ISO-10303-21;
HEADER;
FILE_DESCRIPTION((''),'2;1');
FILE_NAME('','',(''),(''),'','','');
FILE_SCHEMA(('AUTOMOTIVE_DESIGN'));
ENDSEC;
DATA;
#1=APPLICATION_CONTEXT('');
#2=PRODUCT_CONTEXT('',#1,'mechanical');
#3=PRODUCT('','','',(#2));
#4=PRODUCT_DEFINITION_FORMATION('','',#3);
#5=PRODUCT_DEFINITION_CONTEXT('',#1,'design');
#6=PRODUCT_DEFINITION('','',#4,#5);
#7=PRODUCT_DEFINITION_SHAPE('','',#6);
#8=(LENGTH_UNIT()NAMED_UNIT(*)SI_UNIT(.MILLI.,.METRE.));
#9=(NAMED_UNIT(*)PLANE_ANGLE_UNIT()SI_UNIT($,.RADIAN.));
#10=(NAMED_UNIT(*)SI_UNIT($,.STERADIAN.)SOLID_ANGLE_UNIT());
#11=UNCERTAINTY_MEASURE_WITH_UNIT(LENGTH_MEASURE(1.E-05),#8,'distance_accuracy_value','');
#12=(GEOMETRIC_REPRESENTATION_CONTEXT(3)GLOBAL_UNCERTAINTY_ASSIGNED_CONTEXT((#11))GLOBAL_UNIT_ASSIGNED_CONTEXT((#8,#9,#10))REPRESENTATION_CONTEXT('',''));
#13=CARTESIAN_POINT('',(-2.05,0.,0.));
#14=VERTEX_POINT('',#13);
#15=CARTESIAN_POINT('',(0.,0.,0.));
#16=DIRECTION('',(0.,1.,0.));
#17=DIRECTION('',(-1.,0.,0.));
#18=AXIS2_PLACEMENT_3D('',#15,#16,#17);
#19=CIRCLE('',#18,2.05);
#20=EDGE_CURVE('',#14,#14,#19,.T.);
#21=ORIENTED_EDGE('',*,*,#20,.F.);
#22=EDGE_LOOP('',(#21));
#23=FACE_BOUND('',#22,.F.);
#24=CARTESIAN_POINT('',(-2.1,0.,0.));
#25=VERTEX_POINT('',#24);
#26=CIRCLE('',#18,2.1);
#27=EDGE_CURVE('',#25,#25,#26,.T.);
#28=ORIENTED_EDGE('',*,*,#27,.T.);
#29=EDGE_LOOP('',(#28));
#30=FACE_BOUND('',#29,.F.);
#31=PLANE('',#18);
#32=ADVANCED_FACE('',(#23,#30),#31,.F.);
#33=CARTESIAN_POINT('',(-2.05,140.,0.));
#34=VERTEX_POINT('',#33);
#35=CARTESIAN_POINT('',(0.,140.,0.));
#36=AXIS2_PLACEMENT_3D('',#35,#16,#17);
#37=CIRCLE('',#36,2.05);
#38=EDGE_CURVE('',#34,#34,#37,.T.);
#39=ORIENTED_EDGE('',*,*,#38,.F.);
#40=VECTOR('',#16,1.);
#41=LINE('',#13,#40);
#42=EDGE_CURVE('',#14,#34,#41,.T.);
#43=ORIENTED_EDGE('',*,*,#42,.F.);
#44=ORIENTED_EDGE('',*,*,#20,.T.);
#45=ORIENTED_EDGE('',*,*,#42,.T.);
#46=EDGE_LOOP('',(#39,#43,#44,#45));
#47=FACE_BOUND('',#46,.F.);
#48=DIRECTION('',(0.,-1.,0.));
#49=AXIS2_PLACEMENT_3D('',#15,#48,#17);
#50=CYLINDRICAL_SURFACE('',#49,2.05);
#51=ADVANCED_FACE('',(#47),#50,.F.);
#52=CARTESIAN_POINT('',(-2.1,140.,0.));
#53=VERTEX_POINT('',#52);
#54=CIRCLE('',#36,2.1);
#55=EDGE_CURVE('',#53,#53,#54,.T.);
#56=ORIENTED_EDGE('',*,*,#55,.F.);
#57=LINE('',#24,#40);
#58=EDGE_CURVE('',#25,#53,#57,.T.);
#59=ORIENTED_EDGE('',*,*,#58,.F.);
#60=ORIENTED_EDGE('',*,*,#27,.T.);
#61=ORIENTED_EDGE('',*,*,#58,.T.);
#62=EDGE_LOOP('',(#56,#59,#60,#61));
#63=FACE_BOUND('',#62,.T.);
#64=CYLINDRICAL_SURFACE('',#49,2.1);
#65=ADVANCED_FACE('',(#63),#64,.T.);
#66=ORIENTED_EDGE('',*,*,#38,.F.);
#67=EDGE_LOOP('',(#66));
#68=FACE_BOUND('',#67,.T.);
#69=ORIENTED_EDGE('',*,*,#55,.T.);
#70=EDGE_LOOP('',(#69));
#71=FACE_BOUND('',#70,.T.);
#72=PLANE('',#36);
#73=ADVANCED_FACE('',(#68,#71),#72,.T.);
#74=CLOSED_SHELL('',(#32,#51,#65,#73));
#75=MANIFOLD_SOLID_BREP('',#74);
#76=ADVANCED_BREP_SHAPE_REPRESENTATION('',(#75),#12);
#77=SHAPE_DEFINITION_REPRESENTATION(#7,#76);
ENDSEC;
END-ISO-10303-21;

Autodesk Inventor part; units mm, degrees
ref_plane "YZ Plane" through (0, 0, 0) normal (1, 0, 0) x (0, 1, 0)
ref_plane "XZ Plane" through (0, 0, 0) normal (0, 1, 0) x (-1, 0, 0)
ref_plane "XY Plane" through (0, 0, 0) normal (0, 0, 1) x (1, 0, 0)
sketch "Sketch1" plane through (0, 0, 0) normal (0, 1, 0) x (-1, 0, 0)
  circle A0 centre (0, 0) radius 2.05
  circle A1 centre (0, 0) radius 2.1
  dimension "d0" = 4.1
  dimension "d1" = 4.2
extrude "Extrusion1" add sketch "Sketch1" along normal blind 140
properties part number "dummy_mckibben_pam_sleeve_4.2mm"
